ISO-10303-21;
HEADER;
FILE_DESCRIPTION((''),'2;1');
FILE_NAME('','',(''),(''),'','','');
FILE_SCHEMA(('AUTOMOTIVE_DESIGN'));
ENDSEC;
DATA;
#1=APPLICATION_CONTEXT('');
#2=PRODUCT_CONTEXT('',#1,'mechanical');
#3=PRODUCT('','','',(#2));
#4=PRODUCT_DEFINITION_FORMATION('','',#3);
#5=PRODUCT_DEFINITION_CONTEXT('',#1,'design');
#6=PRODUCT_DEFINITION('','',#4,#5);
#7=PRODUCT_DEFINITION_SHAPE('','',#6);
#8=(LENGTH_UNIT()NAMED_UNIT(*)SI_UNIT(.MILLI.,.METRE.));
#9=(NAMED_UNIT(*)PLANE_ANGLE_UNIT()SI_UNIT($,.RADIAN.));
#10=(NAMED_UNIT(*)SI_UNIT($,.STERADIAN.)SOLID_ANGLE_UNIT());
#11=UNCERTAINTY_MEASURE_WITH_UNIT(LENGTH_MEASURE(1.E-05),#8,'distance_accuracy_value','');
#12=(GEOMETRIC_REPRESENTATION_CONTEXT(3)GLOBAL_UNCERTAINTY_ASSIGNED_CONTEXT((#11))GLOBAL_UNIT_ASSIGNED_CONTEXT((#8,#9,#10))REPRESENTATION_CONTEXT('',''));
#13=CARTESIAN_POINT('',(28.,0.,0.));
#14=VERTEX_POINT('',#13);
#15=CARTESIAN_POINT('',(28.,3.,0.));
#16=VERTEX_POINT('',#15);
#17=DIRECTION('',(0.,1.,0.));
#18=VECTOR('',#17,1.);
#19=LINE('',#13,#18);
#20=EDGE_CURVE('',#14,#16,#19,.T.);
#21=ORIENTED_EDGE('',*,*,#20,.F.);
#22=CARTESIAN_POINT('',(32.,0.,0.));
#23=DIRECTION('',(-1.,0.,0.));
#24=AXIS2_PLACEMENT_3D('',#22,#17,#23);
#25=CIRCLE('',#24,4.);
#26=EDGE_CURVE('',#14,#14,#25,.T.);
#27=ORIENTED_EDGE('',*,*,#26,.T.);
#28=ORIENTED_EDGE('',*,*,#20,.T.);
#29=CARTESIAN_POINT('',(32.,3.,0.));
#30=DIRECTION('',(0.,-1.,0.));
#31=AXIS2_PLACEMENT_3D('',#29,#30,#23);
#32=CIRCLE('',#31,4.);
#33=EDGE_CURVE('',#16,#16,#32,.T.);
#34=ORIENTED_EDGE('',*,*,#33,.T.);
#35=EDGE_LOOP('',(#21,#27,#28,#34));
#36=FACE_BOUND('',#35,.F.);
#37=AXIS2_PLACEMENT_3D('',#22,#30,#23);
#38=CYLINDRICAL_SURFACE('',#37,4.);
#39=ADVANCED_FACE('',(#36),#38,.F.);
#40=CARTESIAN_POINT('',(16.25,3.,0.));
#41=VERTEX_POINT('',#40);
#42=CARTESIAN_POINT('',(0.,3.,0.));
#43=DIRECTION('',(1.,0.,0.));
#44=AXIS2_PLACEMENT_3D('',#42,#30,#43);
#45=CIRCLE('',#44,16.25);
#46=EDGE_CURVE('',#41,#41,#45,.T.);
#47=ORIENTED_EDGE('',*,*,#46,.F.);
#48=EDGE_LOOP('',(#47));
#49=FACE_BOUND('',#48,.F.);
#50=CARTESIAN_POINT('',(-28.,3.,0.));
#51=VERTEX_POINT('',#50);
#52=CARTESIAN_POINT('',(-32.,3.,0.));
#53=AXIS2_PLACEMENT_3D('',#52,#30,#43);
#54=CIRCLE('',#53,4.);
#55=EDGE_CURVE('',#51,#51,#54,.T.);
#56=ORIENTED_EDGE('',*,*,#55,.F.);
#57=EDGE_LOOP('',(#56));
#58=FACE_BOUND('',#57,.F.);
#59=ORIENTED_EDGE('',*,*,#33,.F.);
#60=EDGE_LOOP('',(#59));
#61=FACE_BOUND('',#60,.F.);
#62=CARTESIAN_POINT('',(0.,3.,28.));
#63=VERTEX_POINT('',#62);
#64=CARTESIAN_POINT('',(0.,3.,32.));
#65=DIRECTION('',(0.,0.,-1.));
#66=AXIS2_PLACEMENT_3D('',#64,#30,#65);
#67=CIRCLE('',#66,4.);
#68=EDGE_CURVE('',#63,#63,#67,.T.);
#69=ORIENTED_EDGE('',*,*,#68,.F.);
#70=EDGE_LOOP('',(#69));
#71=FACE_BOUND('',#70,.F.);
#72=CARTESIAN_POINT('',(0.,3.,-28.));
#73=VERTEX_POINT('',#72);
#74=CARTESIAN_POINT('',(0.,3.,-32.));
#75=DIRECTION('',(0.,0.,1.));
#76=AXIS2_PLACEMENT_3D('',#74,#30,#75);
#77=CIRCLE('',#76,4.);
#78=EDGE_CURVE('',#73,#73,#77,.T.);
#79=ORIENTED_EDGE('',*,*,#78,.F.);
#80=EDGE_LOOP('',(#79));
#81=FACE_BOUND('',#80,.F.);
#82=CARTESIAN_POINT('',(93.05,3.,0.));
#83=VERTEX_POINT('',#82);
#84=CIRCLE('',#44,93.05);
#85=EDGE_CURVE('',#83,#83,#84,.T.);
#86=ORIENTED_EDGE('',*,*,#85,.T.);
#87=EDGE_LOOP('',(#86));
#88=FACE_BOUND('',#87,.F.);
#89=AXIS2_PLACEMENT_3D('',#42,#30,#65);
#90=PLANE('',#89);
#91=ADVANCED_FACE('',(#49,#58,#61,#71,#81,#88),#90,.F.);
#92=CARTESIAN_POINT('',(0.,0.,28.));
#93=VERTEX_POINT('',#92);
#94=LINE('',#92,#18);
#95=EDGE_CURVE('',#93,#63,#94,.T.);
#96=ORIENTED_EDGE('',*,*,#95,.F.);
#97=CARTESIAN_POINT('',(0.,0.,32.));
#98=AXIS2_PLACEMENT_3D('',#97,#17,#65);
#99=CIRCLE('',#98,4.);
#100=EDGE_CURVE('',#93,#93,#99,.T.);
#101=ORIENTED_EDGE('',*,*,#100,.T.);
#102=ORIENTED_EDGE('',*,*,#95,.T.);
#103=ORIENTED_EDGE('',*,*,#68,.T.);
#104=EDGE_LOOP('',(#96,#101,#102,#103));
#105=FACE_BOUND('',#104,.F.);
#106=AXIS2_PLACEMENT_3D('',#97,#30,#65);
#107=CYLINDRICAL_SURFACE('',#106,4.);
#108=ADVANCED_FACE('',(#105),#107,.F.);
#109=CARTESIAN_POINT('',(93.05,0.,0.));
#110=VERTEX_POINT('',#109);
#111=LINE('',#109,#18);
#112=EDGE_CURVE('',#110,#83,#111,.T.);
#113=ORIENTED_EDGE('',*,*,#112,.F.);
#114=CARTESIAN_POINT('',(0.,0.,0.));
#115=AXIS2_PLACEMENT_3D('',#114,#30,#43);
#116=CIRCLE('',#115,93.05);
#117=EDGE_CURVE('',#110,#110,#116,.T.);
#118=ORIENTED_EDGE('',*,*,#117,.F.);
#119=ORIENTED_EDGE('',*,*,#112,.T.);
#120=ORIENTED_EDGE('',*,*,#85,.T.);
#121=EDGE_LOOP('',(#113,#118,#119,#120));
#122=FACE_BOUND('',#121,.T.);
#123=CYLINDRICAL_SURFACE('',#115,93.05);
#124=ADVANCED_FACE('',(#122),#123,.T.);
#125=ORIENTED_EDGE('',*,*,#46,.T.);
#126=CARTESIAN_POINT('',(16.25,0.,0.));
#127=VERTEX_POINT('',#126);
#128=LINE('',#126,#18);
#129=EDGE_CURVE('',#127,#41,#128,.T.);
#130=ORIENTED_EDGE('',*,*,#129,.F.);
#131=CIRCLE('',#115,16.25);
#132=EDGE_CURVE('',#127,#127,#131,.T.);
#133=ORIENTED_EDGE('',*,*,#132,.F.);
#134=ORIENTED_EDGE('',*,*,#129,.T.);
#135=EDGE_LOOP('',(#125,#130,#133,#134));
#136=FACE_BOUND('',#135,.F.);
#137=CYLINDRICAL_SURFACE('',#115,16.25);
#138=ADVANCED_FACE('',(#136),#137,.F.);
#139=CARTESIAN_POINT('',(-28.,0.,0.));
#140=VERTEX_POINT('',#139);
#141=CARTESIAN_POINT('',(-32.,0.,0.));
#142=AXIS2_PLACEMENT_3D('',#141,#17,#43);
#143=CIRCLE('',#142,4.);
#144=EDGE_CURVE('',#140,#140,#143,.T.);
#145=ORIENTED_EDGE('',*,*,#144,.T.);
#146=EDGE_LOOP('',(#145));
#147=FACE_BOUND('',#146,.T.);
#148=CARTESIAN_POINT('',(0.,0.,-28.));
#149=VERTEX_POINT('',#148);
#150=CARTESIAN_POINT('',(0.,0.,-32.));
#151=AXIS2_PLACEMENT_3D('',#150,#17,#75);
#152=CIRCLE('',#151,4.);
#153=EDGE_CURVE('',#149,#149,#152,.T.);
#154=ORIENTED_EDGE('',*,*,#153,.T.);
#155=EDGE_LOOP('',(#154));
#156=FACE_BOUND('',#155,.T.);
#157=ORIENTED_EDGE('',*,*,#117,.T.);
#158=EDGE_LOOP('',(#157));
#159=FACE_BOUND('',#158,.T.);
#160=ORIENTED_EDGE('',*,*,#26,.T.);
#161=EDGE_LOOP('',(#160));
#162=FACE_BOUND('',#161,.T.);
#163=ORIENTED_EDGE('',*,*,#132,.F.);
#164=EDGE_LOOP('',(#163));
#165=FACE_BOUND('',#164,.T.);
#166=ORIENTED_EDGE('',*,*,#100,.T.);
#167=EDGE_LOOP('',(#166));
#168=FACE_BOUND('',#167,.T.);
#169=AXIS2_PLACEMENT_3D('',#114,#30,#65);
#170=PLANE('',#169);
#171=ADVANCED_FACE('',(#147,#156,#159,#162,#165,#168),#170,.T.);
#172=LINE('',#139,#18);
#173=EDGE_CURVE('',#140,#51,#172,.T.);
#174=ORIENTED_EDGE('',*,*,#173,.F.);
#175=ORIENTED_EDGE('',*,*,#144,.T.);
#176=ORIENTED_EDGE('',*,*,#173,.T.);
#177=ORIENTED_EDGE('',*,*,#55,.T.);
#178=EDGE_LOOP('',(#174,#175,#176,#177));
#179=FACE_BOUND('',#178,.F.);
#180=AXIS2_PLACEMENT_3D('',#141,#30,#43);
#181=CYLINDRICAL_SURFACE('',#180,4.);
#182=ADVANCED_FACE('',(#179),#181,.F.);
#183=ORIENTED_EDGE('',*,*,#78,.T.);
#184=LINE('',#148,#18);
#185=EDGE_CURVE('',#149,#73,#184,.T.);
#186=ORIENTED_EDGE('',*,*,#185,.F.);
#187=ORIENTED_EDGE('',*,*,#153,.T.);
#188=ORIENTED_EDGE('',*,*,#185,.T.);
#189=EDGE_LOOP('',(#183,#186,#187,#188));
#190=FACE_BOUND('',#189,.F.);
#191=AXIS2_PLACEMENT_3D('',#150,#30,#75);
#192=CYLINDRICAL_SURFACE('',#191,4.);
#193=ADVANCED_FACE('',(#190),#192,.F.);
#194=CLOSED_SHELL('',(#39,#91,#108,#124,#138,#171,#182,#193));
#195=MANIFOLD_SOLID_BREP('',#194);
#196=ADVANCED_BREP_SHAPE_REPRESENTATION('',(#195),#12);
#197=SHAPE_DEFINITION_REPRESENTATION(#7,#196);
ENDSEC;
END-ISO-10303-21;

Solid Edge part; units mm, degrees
sketch "Sketch1" plane through (0, 0, 0) normal (0, -1, 0) x (1, 0, 0)
  circle A0 centre (0, 0) radius 93.05
  circle A1 centre (0, 0) radius 16.25
  dimension "D1" = 32.5
  dimension "D2" = 186.1
extrude "Protrusion1" add sketch "Sketch1" against normal blind 3
hole "Hole_1" at (0, 0, 32) direction (0, 1, 0) diameter 8 end up to next
pattern_circular "Pattern2" count 4 over 360 about axis through (0, 0, 0) along (0, 1, 0) of "Hole_1"
